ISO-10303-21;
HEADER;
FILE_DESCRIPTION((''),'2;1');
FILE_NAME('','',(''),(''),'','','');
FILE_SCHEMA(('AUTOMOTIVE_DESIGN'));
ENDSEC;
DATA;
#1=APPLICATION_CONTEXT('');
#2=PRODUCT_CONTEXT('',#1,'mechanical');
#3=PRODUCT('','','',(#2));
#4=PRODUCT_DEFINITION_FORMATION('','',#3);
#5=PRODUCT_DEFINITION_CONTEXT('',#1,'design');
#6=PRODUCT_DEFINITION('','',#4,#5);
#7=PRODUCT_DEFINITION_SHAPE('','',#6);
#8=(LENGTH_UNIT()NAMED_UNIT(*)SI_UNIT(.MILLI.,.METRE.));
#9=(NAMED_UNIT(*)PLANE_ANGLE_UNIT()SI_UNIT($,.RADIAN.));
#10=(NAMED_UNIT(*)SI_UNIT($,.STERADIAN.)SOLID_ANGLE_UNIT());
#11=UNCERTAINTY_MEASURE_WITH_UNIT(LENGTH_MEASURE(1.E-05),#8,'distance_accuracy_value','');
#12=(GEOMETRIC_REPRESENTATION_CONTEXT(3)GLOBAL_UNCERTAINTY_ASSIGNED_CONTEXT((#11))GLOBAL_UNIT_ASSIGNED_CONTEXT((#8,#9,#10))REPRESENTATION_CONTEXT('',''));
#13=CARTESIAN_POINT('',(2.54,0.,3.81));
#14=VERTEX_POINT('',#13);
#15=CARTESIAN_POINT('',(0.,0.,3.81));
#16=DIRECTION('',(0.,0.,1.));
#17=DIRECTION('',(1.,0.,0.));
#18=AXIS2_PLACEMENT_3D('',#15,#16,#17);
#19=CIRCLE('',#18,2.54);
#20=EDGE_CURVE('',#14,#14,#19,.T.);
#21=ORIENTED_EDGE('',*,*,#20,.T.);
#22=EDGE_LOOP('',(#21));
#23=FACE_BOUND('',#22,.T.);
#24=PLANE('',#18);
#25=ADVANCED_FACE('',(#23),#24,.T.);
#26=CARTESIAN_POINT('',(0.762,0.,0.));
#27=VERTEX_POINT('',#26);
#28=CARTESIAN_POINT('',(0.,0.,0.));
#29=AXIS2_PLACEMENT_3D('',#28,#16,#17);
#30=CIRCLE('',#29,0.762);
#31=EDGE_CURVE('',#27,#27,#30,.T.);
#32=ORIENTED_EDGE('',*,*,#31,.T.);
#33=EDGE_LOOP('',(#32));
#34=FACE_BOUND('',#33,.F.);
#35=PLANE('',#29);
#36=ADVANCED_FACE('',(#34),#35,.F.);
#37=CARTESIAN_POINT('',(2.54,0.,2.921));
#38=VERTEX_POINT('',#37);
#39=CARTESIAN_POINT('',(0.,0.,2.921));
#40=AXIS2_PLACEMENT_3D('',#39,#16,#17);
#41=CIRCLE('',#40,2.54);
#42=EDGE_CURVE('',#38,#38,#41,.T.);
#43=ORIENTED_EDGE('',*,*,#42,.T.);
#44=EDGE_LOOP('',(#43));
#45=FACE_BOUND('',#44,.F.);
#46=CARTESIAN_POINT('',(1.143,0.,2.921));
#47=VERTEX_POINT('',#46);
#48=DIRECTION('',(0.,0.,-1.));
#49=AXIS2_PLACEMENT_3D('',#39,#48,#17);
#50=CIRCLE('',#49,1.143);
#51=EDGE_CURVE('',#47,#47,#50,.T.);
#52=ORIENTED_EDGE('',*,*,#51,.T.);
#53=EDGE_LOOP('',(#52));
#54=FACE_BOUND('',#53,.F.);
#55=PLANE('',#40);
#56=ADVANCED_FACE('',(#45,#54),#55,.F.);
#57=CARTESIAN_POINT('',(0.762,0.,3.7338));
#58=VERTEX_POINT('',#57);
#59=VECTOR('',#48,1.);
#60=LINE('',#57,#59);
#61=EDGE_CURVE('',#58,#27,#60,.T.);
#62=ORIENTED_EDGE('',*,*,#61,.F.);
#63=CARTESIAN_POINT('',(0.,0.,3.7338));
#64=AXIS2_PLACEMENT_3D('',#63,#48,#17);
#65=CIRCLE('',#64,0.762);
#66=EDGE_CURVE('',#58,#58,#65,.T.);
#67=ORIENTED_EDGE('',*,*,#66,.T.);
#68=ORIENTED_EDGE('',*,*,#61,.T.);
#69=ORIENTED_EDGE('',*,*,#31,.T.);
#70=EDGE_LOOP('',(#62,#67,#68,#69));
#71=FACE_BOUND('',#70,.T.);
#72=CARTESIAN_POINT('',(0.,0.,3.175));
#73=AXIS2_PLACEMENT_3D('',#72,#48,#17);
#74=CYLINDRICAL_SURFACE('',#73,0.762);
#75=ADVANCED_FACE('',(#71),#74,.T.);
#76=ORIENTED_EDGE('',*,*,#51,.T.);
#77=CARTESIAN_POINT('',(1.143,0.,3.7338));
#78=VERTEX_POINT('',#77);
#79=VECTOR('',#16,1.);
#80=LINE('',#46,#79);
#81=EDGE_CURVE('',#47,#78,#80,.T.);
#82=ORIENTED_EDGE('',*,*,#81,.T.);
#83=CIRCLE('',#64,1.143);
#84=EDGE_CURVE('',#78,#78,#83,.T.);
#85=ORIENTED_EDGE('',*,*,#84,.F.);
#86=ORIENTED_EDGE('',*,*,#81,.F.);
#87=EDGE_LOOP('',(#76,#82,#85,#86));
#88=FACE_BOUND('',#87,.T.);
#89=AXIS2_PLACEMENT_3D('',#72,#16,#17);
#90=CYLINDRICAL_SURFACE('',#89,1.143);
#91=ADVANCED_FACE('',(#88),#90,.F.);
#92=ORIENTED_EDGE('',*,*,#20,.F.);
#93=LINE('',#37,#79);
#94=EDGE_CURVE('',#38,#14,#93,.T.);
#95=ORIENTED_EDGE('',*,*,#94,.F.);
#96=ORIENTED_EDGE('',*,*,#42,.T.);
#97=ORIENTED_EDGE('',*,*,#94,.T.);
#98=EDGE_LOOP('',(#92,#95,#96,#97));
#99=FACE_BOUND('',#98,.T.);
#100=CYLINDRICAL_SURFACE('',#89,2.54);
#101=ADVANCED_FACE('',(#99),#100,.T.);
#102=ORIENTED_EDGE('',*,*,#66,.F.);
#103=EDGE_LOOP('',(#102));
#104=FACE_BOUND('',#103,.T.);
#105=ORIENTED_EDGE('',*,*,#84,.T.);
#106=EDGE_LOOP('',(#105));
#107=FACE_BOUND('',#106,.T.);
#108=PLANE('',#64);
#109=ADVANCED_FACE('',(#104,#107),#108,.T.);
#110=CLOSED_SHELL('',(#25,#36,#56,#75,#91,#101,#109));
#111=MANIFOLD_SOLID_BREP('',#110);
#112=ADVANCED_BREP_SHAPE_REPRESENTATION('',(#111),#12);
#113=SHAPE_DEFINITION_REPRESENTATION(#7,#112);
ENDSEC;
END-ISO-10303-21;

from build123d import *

# Parameters (mm, degrees)
F0_R     = 0.762
F1_DEPTH = 3.81
F2_R     = 2.54
F3_DEPTH = 0.635
F4_R     = 1.143
F4_R_2   = 0.762
F5_DEPTH = 0.5588
F6_DEPTH = 0.254


with BuildPart() as f1:
    # F0 (on Top) → F1 (new body)
    with BuildSketch(Plane.XY):
        Circle(F0_R)
    extrude(amount=F1_DEPTH)

    # F2 (on face) → F3 (join)
    with BuildSketch(Plane.XY.offset(3.81)):
        Circle(F2_R)
    extrude(amount=-F3_DEPTH)

    # F4 (on face) → F5 (cut)
    with BuildSketch(Plane(origin=(0, 0, 3.175), x_dir=(1, 0, 0), z_dir=(0, 0, -1))):
        Circle(F4_R)
        Circle(F4_R_2, mode=Mode.SUBTRACT)
    extrude(amount=-F5_DEPTH, mode=Mode.SUBTRACT)

    # F6 (add): a face of the model
    f6_faces = [f1.faces().sort_by_distance(p)[0] for p in [
        (-2.468157951, 0, 3.175),
    ]]
    extrude(f6_faces, amount=F6_DEPTH)


solid = f1.part
